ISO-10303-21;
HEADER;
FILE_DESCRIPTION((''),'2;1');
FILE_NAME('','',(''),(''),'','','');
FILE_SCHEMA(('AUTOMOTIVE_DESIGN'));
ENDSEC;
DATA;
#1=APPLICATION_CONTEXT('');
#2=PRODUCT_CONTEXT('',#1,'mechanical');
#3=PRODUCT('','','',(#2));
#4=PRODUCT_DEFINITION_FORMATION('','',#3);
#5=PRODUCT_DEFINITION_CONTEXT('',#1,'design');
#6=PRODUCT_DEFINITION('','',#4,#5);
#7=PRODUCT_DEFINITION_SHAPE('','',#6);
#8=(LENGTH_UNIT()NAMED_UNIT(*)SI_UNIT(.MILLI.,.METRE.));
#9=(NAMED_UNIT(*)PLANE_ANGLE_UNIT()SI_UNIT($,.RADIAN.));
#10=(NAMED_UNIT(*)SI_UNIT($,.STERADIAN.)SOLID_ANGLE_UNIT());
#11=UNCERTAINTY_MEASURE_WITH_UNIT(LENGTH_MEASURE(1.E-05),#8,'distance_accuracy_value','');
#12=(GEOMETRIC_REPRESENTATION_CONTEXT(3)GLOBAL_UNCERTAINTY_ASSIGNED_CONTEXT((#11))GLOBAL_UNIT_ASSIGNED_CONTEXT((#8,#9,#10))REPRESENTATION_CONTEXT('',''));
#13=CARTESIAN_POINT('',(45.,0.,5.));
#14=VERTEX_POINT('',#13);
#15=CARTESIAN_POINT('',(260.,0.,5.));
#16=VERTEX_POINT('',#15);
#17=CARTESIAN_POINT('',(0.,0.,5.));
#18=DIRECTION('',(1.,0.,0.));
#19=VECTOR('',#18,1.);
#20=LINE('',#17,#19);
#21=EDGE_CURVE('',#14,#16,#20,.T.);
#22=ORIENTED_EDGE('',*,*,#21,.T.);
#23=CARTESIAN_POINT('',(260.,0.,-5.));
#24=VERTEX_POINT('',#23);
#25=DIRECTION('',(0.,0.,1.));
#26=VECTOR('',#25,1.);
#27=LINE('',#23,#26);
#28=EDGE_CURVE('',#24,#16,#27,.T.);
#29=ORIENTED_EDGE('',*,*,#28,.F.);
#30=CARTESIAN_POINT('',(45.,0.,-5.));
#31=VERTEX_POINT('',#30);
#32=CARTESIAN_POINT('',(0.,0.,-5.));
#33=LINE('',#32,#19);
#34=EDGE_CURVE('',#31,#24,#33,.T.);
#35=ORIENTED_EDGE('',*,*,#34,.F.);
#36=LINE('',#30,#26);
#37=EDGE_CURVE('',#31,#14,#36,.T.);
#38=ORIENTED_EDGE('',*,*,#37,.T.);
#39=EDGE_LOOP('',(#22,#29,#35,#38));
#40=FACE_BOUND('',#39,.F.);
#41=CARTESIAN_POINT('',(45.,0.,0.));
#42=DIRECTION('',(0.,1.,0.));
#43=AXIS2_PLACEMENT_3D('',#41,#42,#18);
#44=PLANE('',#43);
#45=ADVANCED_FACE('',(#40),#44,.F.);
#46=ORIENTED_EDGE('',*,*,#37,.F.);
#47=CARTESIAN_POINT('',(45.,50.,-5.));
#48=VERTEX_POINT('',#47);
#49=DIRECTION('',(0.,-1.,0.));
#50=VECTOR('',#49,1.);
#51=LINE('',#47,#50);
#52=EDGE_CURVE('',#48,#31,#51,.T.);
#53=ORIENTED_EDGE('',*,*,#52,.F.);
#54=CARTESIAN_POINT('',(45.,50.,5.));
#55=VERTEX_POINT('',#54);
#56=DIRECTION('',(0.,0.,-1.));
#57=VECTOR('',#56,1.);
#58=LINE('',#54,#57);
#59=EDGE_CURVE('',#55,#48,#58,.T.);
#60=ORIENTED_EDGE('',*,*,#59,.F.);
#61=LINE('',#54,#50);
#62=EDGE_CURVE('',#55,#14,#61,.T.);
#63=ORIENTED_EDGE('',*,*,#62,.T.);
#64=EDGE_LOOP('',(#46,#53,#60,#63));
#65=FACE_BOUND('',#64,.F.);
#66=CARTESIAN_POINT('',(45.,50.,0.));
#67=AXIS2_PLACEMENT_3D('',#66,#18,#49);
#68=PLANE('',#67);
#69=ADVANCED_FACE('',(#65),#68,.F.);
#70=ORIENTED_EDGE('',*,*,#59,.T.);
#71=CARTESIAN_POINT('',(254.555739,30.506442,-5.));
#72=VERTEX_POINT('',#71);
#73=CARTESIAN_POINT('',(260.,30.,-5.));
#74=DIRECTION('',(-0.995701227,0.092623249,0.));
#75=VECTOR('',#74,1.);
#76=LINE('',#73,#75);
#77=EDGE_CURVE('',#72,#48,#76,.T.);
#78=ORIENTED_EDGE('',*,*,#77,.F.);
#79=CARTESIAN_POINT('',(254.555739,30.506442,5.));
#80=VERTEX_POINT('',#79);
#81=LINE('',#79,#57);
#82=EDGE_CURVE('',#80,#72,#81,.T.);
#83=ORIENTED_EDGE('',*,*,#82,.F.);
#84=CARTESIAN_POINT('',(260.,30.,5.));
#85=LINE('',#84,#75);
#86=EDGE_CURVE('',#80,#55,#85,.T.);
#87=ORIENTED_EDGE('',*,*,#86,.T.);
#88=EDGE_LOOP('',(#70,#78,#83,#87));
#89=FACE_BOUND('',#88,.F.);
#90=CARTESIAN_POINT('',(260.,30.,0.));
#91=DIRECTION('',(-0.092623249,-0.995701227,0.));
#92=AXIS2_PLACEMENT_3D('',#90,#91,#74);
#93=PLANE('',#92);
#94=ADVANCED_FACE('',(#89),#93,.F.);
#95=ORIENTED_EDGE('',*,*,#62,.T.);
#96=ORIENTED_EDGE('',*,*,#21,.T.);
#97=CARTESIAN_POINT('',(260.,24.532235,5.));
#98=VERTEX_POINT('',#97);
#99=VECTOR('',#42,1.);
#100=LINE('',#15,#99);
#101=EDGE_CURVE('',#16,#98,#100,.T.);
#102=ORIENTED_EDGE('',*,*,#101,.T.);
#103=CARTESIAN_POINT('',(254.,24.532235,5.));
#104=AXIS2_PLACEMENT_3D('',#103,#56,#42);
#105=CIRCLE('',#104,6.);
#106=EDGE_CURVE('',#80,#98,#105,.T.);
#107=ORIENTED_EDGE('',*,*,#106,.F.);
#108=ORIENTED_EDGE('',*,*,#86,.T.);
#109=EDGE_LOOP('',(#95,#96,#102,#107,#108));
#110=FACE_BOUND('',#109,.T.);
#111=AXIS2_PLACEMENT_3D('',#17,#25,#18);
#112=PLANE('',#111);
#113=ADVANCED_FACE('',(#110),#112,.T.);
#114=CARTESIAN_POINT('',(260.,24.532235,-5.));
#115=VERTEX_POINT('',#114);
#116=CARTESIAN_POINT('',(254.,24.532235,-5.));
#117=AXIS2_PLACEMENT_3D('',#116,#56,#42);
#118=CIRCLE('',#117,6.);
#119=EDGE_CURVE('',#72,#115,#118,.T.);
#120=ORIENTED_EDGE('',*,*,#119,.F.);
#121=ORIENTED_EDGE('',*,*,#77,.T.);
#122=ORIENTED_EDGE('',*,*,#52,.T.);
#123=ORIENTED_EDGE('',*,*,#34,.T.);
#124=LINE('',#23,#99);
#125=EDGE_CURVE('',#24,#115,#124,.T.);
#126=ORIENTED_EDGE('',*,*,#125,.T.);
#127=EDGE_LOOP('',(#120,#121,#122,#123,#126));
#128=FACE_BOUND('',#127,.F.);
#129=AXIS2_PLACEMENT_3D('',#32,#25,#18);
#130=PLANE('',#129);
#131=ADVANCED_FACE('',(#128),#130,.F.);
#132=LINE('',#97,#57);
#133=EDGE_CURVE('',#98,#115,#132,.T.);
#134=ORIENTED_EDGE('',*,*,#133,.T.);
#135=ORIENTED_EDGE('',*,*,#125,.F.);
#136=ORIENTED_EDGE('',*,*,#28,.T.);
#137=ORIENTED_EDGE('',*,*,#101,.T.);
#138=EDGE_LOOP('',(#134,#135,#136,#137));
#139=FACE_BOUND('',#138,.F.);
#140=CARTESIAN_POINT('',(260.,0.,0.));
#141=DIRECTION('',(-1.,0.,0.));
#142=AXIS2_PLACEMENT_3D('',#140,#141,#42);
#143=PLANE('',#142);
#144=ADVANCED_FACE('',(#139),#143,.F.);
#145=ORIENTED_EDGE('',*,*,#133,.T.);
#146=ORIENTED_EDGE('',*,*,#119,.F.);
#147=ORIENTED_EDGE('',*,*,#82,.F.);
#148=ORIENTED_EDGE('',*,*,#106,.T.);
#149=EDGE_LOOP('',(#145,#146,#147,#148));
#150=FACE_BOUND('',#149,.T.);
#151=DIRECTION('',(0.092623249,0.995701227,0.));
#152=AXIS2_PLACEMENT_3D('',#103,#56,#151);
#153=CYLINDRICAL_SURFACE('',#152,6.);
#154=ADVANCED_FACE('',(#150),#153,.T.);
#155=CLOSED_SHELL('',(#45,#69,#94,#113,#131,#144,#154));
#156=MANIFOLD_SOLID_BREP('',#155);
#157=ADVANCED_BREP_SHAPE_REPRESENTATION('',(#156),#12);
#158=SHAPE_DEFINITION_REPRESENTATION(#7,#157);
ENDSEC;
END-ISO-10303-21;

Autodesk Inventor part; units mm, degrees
ref_plane "YZ Plane" through (0, 0, 0) normal (1, 0, 0) x (0, 1, 0)
ref_plane "XZ Plane" through (0, 0, 0) normal (0, 1, 0) x (-1, 0, 0)
ref_plane "XY Plane" through (0, 0, 0) normal (0, 0, 1) x (1, 0, 0)
sketch "Sketch3" plane through (0, 0, 0) normal (0, 0, 1) x (1, 0, 0)
  line L0 (0, 0) -> (260, 0)
  line L1 (260, 0) -> (260, 30)
  line L2 (260, 30) -> (-45.1628, 58.3872)
  line L3 (45, 50) -> (45, 0)
  dimension "d11" = 260
  dimension "d12" = 30
  dimension "d13" = 45
  dimension "d14" = 50
extrude "Plate1" add sketch "Sketch3" along normal mid plane 10
fillet "Corner Round1" radius 6 1 edges at (260, 30, 0)
equation "\"d15\" = Thickness"
equation "\"BendReliefDepth\" = 0.5 * Thickness"
equation "\"Thickness\" = 10"
properties part number "PRS 940-24 charging hatch reinf 500mm" material "Steel"
